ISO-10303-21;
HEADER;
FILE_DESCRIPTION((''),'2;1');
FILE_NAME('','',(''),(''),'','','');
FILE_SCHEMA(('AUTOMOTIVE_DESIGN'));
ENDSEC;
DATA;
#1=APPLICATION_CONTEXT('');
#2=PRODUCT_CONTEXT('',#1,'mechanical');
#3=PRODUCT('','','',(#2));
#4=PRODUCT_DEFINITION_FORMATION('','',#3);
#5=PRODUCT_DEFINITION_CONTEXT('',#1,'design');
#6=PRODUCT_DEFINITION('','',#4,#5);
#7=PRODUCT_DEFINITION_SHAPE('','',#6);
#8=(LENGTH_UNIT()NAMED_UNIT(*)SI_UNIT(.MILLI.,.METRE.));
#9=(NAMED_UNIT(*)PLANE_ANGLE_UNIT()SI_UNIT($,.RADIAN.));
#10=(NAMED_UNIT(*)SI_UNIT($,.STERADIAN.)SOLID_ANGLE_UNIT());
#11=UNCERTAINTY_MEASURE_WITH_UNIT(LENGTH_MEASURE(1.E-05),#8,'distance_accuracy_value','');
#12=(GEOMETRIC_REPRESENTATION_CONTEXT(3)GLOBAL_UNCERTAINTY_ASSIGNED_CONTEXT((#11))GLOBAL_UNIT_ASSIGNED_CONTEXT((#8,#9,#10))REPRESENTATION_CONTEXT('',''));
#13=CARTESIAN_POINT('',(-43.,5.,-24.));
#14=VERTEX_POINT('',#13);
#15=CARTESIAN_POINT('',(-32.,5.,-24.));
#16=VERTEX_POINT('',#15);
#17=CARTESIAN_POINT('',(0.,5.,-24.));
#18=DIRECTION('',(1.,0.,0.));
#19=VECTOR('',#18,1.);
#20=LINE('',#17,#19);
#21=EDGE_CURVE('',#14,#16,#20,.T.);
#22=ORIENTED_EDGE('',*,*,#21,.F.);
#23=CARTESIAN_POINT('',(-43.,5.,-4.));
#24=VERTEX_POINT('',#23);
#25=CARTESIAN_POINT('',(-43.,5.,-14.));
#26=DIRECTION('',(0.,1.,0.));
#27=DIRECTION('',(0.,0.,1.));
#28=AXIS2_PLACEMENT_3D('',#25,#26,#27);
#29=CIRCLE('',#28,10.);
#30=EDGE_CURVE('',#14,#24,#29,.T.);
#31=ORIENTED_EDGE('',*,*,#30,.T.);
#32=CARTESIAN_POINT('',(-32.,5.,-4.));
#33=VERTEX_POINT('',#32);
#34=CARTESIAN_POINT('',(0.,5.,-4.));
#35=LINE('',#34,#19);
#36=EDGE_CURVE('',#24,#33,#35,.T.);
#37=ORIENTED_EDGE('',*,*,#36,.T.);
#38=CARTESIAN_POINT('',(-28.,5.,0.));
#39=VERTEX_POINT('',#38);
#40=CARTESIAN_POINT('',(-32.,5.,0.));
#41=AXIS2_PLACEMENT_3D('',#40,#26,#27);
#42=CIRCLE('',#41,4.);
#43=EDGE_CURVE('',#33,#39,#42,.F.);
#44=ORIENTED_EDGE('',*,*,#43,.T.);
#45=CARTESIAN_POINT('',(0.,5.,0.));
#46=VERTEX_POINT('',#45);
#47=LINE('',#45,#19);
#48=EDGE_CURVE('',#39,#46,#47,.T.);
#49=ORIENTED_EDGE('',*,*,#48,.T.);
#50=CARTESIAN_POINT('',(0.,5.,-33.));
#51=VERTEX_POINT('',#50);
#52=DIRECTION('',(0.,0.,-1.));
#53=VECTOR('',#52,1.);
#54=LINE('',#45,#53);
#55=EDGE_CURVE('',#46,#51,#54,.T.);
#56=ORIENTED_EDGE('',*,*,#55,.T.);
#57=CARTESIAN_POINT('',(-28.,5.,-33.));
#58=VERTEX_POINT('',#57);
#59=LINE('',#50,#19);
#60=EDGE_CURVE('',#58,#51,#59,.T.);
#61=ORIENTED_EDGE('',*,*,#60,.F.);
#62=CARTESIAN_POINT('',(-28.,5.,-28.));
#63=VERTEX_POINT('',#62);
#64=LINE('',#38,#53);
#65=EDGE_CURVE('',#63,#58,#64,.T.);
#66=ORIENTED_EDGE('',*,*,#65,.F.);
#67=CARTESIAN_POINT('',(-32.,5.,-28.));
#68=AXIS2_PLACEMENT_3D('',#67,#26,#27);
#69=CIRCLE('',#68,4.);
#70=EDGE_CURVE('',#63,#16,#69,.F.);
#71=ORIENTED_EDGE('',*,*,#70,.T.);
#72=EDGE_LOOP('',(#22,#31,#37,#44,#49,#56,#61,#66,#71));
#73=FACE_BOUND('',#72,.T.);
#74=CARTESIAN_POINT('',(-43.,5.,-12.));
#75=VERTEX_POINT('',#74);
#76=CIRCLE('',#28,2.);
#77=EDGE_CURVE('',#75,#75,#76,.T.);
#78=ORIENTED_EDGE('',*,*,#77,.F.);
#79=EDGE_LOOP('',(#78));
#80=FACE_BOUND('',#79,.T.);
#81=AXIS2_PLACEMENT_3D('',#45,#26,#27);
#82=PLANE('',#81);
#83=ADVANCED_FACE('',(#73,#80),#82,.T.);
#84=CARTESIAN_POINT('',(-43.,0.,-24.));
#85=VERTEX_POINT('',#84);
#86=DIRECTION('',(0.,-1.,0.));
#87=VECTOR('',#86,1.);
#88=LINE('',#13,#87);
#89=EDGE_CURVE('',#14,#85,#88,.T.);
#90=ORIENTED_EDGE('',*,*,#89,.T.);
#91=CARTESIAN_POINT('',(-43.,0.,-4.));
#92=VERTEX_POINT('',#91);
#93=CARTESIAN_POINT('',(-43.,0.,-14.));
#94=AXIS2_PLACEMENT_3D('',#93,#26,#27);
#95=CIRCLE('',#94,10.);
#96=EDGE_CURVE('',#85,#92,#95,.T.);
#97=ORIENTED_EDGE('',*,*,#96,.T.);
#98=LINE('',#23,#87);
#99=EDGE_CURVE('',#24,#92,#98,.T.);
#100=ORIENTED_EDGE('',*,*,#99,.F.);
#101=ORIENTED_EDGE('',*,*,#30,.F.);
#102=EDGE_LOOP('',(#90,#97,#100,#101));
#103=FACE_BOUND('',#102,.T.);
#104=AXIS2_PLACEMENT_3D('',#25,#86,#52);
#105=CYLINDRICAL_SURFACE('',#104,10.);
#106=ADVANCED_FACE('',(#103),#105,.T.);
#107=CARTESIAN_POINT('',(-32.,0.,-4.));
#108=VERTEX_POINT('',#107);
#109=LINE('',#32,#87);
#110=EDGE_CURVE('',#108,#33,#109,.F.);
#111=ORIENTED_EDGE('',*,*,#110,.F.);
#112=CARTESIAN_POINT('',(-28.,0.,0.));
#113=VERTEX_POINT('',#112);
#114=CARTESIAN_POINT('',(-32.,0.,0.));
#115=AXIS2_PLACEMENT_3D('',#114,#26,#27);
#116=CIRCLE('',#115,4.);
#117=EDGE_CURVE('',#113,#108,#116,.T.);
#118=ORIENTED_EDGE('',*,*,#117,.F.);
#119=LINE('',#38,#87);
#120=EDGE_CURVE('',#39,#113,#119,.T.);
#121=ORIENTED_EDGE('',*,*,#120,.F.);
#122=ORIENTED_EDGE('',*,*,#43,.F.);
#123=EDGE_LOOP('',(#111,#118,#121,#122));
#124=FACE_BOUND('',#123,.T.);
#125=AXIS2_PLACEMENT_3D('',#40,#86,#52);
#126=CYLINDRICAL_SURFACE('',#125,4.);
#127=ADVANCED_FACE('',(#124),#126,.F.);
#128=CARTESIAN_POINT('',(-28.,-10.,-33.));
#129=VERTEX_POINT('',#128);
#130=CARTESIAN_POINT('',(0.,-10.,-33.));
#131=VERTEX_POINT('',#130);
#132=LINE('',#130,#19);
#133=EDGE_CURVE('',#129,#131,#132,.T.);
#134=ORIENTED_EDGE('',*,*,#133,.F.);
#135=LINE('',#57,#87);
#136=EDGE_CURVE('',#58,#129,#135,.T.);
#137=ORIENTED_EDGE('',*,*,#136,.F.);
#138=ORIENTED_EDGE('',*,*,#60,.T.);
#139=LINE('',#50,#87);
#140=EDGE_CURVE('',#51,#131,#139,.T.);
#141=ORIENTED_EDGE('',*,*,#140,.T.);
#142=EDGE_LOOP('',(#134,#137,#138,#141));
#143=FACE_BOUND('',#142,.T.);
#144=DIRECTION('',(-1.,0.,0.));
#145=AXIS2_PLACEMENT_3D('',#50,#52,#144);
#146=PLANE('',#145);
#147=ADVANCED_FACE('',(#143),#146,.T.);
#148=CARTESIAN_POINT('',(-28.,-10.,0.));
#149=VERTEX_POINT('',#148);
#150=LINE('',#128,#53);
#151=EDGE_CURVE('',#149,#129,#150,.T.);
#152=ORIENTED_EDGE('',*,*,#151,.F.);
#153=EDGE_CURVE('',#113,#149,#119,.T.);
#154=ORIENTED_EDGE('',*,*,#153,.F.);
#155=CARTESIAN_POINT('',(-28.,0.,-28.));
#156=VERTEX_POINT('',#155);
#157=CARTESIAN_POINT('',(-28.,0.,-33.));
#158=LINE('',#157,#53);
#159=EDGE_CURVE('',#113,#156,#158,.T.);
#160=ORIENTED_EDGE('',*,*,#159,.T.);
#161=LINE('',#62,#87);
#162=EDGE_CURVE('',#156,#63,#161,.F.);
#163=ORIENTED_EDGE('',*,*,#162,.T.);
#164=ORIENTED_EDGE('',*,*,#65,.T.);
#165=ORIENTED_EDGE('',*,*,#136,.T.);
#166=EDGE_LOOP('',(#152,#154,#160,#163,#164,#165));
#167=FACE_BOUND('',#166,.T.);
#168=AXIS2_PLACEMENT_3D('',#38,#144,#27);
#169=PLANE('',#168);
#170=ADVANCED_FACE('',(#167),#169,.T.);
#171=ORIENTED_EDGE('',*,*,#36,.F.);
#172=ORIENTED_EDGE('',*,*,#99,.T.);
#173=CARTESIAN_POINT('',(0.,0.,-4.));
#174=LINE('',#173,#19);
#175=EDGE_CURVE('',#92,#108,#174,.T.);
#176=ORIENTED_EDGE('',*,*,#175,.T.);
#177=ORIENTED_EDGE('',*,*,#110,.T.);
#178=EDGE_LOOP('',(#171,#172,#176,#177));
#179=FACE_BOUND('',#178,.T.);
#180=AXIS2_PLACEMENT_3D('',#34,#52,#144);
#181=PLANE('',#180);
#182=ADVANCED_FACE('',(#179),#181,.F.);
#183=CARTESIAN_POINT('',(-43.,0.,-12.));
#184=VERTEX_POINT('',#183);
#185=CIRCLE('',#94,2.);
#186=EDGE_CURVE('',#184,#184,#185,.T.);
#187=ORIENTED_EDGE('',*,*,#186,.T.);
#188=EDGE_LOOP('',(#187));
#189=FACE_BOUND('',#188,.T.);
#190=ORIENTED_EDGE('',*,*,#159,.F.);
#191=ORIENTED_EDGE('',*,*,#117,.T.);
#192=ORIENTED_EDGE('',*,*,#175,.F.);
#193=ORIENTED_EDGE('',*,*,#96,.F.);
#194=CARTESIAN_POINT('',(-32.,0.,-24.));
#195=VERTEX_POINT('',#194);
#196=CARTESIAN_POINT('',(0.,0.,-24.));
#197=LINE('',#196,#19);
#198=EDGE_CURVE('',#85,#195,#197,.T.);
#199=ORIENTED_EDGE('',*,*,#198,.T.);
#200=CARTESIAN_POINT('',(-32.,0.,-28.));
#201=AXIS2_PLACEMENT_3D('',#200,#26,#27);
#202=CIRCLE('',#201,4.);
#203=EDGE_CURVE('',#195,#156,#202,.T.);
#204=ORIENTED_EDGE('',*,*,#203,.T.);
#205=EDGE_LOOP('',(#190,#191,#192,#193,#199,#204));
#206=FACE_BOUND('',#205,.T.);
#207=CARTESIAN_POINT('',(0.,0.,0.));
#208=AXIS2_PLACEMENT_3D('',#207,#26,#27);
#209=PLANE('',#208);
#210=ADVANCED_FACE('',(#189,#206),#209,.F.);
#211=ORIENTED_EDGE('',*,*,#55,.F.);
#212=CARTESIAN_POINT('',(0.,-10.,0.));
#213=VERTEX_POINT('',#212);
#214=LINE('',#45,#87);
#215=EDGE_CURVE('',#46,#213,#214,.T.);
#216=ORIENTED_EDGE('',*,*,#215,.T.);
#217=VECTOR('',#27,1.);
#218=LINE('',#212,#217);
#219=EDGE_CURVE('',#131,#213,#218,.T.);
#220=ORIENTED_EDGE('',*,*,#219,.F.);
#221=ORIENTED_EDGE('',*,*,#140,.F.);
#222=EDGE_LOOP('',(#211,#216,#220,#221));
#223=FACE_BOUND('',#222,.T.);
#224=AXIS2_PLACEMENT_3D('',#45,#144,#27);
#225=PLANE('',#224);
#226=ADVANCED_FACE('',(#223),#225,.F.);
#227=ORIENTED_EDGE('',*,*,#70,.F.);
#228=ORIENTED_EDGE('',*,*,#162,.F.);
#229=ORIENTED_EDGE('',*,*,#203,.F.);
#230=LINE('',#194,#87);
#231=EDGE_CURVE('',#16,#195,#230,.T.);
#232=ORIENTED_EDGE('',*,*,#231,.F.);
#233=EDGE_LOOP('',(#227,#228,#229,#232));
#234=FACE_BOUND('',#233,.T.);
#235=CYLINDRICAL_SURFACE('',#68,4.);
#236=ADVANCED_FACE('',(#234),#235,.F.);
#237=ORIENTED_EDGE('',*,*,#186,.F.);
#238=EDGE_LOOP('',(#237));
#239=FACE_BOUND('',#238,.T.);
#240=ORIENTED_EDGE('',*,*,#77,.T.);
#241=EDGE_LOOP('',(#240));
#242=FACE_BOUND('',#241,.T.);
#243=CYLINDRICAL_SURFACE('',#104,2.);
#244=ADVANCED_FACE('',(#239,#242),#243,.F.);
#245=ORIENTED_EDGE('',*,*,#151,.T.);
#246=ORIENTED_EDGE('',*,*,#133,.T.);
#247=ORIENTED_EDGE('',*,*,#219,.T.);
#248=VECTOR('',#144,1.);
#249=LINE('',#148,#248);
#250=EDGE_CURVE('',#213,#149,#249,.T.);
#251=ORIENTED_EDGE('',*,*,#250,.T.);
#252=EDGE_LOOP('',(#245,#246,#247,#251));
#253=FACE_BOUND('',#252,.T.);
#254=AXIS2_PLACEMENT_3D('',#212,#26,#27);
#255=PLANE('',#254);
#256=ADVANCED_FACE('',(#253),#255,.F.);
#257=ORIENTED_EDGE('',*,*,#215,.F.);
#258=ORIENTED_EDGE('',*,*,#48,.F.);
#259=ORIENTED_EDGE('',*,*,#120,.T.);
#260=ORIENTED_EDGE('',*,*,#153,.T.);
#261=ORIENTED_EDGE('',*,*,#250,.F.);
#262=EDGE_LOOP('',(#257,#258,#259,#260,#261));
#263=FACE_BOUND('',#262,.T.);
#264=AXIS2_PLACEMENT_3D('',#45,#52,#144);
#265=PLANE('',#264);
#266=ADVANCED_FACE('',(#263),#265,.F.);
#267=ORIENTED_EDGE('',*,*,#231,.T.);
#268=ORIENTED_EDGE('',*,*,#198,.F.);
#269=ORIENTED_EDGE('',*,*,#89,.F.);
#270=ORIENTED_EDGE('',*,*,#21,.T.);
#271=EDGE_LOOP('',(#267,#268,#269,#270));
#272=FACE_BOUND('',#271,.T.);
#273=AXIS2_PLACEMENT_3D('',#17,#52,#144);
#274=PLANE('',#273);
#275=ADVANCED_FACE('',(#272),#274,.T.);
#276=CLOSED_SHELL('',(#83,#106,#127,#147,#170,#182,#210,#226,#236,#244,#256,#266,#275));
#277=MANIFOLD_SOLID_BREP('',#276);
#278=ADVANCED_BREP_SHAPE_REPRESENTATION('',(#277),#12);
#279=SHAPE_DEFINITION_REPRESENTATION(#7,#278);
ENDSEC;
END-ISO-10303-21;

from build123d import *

# Parameters (mm, degrees)
AUFSATZ_LINEAR_AUSTRAGEN1_DEPTH = 5
SKIZZE4_W                       = 28
SKIZZE4_H                       = 33
AUFSATZ_LINEAR_AUSTRAGEN3_DEPTH = 10
VERRUNDUNG1_R                   = 4
VERRUNDUNG2_R                   = 4


with BuildPart() as part:
    # Skizze2 → Aufsatz-Linear austragen1 (new body)
    with BuildSketch(Plane(origin=(0, 0, 0), x_dir=(1, 0, 0), z_dir=(0, 1, 0))):
        with BuildLine():
            Line((0, 33), (-28, 33))
            Line((-28, 33), (-28, 24))
            Line((-28, 24), (-43, 24))
            ThreePointArc((-43, 24), (-35.928932188, 21.071067812), (-33, 14))
            ThreePointArc((-33, 14), (-35.928932188, 6.928932188), (-43, 4))
            Line((-43, 4), (-28, 4))
            Line((-28, 4), (-28, 0))
            Line((-28, 0), (0, 0))
            Line((0, 0), (0, 33))
        make_face()
        with BuildLine():
            ThreePointArc((-33, 14), (-35.928932188, 21.071067812), (-43, 24))
            Line((-43, 24), (-43, 16))
            ThreePointArc((-43, 16), (-41.585786438, 15.414213562), (-41, 14))
            ThreePointArc((-41, 14), (-41.585786438, 12.585786438), (-43, 12))
            Line((-43, 12), (-43, 4))
            ThreePointArc((-43, 4), (-35.928932188, 6.928932188), (-33, 14))
        make_face()
        with BuildLine():
            Line((-43, 16), (-43, 24))
            ThreePointArc((-43, 24), (-53, 14), (-43, 4))
            Line((-43, 4), (-43, 12))
            ThreePointArc((-43, 12), (-45, 14), (-43, 16))
        make_face()
    extrude(amount=AUFSATZ_LINEAR_AUSTRAGEN1_DEPTH)

    # Skizze4 → Aufsatz-Linear austragen3 (add)
    with BuildSketch(Plane.XZ):
        with Locations((-14, -16.5)):
            Rectangle(SKIZZE4_W, SKIZZE4_H)
    extrude(amount=AUFSATZ_LINEAR_AUSTRAGEN3_DEPTH)

    # Verrundung1
    verrundung1_edges = [part.edges().sort_by_distance(p)[0] for p in [
        (-28, 2.5, -4),
    ]]
    fillet(verrundung1_edges, radius=VERRUNDUNG1_R - 0.0001)  # a hair under: the kernel refuses the full size

    # Verrundung2
    verrundung2_edges = [part.edges().sort_by_distance(p)[0] for p in [
        (-28, 2.5, -24),
    ]]
    fillet(verrundung2_edges, radius=VERRUNDUNG2_R)


solid = part.part
